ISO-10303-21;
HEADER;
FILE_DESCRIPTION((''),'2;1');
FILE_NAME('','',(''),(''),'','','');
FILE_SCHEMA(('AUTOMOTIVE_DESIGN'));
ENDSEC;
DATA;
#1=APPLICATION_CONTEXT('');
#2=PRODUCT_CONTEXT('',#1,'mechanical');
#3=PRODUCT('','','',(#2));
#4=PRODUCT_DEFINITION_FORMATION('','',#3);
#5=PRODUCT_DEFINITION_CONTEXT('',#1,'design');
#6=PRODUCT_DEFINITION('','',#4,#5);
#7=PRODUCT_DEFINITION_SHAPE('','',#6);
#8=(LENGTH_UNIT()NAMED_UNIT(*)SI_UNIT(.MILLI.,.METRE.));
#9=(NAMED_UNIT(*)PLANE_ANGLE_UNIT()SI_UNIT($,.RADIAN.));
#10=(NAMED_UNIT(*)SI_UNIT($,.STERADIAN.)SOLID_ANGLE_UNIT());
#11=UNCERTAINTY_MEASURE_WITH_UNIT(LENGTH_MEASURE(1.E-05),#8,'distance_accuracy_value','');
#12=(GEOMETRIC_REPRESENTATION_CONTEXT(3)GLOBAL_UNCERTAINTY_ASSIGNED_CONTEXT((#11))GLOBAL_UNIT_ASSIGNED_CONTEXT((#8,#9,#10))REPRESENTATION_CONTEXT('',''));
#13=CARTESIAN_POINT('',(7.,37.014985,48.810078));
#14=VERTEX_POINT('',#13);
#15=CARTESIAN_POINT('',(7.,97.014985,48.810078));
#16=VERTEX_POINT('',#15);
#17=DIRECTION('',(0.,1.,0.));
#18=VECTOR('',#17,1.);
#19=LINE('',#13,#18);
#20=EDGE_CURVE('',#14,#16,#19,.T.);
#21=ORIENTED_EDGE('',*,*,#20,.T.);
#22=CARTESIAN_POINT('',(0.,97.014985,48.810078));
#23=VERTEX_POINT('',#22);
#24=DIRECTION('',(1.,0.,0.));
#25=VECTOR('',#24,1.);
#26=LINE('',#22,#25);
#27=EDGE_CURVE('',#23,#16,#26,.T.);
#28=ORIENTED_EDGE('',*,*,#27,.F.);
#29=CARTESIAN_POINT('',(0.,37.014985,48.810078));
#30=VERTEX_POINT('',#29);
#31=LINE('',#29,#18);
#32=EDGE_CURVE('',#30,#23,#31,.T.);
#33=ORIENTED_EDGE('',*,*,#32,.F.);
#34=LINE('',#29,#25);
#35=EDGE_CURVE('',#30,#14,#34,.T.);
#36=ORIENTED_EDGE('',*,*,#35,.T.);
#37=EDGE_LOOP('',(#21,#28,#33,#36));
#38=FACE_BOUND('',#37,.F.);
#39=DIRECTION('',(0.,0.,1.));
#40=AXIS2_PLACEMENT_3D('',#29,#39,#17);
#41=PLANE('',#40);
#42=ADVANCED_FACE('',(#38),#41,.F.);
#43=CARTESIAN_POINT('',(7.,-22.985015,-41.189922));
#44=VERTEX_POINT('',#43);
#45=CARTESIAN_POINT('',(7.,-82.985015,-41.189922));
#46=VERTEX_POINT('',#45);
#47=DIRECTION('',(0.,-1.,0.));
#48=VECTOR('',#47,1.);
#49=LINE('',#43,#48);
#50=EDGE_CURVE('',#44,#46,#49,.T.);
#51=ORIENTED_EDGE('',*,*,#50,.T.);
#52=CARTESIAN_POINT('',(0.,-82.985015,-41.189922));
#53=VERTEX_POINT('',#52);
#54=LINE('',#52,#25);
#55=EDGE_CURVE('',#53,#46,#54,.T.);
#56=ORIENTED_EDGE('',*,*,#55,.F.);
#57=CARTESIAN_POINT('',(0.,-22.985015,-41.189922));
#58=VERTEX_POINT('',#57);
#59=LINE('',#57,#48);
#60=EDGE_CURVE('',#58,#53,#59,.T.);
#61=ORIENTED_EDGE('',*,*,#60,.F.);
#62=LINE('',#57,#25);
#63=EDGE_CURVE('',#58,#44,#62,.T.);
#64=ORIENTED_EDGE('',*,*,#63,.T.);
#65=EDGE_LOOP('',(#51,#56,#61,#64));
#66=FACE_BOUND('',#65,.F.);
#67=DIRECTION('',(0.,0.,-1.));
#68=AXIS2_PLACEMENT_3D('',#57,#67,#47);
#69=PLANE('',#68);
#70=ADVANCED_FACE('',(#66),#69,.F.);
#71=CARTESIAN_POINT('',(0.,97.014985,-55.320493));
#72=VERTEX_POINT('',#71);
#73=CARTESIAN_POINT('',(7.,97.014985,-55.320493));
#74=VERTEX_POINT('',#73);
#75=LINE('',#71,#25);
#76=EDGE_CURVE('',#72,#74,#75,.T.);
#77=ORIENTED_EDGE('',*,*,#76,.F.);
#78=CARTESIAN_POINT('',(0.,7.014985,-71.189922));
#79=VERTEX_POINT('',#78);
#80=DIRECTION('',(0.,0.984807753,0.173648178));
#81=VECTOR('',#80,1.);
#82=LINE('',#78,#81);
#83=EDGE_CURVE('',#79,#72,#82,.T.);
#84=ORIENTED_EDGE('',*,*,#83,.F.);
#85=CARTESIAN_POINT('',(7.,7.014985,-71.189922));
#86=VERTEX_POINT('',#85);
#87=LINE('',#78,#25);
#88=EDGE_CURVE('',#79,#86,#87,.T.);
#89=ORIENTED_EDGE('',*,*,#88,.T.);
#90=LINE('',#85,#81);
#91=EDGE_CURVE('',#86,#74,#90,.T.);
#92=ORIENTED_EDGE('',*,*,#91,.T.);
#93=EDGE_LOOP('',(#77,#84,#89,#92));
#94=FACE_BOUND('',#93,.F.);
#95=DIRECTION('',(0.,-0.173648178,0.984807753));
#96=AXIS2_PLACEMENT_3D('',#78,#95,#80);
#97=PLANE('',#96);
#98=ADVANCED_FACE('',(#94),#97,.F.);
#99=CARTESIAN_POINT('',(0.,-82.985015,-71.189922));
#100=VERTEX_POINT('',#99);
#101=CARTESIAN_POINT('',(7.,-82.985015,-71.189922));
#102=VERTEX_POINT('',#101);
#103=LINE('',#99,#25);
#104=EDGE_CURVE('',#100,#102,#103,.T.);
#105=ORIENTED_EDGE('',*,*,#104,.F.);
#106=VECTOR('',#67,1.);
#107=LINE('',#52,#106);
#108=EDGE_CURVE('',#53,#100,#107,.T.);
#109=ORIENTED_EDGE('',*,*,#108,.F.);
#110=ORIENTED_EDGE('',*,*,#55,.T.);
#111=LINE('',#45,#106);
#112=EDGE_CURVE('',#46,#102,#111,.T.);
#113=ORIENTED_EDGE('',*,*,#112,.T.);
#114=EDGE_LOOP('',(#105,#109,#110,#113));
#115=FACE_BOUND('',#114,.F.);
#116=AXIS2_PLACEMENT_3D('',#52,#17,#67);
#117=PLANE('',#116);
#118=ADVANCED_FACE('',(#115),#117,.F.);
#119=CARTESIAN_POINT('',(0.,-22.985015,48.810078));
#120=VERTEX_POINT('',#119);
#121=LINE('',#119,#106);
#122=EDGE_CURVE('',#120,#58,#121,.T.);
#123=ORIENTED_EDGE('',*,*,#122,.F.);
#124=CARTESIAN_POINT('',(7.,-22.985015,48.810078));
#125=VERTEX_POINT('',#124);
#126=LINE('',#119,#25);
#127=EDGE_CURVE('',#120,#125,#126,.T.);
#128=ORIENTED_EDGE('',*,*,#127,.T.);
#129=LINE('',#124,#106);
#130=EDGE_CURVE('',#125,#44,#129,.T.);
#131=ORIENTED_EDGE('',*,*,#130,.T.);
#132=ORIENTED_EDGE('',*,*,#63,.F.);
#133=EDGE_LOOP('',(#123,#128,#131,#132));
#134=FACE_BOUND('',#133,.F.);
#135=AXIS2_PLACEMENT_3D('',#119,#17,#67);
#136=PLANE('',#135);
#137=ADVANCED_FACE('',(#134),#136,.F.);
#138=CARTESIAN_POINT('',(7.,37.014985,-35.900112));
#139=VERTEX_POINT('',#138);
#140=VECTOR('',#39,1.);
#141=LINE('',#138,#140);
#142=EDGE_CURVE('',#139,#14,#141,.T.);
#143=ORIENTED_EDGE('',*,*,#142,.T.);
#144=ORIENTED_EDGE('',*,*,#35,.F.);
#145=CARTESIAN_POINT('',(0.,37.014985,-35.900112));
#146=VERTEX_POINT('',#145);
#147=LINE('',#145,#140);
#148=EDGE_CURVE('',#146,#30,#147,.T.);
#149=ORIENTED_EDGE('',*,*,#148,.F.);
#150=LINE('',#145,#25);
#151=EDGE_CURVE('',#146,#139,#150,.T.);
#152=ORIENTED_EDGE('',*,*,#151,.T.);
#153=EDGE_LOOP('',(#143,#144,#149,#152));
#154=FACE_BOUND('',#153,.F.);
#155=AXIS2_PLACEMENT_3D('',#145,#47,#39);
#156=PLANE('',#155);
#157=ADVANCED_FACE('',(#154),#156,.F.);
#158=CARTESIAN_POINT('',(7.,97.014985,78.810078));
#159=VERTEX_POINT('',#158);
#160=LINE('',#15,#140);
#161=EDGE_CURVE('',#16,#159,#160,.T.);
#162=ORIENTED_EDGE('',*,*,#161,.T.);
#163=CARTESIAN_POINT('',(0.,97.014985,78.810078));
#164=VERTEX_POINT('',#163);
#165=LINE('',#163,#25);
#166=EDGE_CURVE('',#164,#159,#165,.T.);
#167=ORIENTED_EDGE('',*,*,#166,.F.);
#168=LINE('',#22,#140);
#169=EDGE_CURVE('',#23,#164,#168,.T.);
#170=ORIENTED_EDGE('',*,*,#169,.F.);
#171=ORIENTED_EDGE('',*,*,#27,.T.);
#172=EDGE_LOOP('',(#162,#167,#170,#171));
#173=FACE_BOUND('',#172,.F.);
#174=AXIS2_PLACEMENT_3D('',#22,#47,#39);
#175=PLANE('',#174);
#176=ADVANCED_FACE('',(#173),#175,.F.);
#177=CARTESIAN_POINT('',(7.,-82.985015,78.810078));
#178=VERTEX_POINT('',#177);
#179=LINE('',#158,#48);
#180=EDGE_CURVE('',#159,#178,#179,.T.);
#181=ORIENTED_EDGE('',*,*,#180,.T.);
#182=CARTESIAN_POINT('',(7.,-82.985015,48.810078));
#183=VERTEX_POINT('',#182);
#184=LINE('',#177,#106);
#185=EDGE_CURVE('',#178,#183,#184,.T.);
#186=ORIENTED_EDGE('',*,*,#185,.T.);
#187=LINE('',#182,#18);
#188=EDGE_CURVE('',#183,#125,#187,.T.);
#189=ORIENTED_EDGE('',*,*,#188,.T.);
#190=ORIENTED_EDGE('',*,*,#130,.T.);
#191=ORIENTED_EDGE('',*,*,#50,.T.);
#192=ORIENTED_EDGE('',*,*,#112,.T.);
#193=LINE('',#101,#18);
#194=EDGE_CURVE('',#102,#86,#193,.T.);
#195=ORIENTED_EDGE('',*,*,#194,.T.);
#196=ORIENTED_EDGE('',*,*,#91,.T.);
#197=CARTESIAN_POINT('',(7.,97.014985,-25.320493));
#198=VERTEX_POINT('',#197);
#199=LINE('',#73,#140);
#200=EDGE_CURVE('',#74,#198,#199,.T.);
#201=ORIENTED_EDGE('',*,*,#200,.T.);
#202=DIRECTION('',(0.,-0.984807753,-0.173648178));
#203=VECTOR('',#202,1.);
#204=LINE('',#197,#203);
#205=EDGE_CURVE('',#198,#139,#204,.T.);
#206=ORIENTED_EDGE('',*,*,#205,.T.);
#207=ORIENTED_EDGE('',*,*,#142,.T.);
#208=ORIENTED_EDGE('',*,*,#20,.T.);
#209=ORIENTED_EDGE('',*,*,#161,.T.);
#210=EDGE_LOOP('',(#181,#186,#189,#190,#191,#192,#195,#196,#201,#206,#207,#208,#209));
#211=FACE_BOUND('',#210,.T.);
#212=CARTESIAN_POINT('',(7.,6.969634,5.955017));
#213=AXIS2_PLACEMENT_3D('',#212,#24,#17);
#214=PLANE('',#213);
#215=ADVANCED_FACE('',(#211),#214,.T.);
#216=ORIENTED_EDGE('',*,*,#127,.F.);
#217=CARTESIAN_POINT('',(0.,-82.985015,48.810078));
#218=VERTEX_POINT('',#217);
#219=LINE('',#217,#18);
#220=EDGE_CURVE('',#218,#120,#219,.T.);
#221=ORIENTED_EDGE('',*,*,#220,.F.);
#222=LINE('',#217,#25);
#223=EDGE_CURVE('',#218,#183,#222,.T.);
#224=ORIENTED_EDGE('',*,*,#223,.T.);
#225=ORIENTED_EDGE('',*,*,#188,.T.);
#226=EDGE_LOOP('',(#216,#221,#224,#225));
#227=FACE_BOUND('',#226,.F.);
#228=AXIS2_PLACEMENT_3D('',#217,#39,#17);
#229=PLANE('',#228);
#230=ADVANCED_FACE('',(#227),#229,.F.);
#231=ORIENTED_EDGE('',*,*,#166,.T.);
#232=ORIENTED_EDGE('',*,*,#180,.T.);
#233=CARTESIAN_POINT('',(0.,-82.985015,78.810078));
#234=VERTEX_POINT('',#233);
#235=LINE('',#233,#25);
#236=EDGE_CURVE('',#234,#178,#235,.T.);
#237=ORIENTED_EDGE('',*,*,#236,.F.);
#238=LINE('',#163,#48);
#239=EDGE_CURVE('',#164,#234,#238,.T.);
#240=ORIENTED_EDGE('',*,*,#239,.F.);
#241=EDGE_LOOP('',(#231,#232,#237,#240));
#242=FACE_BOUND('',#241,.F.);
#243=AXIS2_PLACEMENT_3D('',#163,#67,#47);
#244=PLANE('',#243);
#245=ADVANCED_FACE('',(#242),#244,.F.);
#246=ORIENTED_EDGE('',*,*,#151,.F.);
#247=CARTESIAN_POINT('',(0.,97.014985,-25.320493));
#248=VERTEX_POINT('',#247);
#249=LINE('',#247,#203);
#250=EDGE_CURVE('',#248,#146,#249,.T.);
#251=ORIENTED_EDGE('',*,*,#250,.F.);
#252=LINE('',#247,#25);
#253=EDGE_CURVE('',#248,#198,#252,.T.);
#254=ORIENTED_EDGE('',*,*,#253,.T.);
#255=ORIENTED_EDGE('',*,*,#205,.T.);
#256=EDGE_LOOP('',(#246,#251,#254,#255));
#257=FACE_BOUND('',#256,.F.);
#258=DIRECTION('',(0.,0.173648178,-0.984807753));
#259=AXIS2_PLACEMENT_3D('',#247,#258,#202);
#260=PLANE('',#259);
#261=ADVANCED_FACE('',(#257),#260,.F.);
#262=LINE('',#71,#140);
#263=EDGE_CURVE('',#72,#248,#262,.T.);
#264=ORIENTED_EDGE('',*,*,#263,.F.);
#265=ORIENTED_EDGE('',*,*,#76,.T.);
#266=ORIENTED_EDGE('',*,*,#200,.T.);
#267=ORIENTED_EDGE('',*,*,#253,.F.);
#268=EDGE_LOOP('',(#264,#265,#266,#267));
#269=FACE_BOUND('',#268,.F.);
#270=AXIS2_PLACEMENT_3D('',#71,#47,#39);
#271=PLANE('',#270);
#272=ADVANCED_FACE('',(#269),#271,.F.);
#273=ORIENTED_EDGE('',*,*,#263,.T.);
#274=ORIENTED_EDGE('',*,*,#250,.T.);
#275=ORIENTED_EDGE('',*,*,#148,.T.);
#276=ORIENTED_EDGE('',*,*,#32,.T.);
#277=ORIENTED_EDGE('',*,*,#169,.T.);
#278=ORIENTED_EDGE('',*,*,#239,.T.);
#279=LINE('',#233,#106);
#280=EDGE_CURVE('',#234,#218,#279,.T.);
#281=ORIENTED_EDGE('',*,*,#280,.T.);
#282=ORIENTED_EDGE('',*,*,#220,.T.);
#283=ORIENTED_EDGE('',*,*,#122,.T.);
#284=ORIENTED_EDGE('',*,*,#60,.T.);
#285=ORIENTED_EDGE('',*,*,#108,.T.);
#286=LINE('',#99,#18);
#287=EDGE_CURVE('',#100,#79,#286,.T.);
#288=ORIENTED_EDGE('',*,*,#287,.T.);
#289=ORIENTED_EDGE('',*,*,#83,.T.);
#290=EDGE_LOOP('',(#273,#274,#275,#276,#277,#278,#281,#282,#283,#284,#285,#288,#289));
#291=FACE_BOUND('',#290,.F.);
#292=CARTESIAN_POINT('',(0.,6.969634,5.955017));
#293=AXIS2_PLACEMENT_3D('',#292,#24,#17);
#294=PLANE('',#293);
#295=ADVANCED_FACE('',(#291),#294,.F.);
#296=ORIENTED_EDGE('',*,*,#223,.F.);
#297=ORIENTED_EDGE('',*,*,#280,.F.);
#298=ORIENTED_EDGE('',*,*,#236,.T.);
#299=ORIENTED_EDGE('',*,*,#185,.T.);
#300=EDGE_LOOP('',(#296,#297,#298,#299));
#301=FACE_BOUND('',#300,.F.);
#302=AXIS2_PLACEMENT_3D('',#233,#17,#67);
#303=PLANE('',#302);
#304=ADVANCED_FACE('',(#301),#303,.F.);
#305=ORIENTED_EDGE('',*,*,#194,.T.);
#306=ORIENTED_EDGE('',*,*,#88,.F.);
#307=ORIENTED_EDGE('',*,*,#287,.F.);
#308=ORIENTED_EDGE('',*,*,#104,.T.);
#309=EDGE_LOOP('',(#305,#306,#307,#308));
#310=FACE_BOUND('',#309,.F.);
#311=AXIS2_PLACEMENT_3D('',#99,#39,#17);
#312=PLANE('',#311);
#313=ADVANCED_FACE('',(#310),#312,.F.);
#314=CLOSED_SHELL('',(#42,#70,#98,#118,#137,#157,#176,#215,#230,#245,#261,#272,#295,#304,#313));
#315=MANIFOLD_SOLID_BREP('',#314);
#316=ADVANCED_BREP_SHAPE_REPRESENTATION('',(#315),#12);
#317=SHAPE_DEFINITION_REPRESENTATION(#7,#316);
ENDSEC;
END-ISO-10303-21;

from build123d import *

# Parameters (mm, degrees)
F1_DEPTH = 7


# Not quite as in the source:
# - a feature names something its author has since deleted; it is built from what else it names


with BuildPart() as f1:
    # F0 (on Right) → F1 (new body)
    with BuildSketch(Plane.YZ):
        Polygon((-82.9850151411, 48.8100783943), (-22.9850151411, 48.8100783943), (-22.9850151411, -41.1170704361), (-22.9850151411, -41.1899216057), (-82.9850151411, -41.1899216057), (-82.9850151411, -71.1899216057), (7.0149848589, -71.1899216057), (97.0149848589, -55.320493342), (97.0149848589, -25.320493342), (37.0149848589, -35.9001121845), (37.0149848589, 48.8100783943), (97.0149848589, 48.8100783943), (97.0149848589, 78.8100783943), (7.0149848589, 78.8100783943), (-82.9850151411, 78.8100783943), align=None)
    extrude(amount=F1_DEPTH)


solid = f1.part
